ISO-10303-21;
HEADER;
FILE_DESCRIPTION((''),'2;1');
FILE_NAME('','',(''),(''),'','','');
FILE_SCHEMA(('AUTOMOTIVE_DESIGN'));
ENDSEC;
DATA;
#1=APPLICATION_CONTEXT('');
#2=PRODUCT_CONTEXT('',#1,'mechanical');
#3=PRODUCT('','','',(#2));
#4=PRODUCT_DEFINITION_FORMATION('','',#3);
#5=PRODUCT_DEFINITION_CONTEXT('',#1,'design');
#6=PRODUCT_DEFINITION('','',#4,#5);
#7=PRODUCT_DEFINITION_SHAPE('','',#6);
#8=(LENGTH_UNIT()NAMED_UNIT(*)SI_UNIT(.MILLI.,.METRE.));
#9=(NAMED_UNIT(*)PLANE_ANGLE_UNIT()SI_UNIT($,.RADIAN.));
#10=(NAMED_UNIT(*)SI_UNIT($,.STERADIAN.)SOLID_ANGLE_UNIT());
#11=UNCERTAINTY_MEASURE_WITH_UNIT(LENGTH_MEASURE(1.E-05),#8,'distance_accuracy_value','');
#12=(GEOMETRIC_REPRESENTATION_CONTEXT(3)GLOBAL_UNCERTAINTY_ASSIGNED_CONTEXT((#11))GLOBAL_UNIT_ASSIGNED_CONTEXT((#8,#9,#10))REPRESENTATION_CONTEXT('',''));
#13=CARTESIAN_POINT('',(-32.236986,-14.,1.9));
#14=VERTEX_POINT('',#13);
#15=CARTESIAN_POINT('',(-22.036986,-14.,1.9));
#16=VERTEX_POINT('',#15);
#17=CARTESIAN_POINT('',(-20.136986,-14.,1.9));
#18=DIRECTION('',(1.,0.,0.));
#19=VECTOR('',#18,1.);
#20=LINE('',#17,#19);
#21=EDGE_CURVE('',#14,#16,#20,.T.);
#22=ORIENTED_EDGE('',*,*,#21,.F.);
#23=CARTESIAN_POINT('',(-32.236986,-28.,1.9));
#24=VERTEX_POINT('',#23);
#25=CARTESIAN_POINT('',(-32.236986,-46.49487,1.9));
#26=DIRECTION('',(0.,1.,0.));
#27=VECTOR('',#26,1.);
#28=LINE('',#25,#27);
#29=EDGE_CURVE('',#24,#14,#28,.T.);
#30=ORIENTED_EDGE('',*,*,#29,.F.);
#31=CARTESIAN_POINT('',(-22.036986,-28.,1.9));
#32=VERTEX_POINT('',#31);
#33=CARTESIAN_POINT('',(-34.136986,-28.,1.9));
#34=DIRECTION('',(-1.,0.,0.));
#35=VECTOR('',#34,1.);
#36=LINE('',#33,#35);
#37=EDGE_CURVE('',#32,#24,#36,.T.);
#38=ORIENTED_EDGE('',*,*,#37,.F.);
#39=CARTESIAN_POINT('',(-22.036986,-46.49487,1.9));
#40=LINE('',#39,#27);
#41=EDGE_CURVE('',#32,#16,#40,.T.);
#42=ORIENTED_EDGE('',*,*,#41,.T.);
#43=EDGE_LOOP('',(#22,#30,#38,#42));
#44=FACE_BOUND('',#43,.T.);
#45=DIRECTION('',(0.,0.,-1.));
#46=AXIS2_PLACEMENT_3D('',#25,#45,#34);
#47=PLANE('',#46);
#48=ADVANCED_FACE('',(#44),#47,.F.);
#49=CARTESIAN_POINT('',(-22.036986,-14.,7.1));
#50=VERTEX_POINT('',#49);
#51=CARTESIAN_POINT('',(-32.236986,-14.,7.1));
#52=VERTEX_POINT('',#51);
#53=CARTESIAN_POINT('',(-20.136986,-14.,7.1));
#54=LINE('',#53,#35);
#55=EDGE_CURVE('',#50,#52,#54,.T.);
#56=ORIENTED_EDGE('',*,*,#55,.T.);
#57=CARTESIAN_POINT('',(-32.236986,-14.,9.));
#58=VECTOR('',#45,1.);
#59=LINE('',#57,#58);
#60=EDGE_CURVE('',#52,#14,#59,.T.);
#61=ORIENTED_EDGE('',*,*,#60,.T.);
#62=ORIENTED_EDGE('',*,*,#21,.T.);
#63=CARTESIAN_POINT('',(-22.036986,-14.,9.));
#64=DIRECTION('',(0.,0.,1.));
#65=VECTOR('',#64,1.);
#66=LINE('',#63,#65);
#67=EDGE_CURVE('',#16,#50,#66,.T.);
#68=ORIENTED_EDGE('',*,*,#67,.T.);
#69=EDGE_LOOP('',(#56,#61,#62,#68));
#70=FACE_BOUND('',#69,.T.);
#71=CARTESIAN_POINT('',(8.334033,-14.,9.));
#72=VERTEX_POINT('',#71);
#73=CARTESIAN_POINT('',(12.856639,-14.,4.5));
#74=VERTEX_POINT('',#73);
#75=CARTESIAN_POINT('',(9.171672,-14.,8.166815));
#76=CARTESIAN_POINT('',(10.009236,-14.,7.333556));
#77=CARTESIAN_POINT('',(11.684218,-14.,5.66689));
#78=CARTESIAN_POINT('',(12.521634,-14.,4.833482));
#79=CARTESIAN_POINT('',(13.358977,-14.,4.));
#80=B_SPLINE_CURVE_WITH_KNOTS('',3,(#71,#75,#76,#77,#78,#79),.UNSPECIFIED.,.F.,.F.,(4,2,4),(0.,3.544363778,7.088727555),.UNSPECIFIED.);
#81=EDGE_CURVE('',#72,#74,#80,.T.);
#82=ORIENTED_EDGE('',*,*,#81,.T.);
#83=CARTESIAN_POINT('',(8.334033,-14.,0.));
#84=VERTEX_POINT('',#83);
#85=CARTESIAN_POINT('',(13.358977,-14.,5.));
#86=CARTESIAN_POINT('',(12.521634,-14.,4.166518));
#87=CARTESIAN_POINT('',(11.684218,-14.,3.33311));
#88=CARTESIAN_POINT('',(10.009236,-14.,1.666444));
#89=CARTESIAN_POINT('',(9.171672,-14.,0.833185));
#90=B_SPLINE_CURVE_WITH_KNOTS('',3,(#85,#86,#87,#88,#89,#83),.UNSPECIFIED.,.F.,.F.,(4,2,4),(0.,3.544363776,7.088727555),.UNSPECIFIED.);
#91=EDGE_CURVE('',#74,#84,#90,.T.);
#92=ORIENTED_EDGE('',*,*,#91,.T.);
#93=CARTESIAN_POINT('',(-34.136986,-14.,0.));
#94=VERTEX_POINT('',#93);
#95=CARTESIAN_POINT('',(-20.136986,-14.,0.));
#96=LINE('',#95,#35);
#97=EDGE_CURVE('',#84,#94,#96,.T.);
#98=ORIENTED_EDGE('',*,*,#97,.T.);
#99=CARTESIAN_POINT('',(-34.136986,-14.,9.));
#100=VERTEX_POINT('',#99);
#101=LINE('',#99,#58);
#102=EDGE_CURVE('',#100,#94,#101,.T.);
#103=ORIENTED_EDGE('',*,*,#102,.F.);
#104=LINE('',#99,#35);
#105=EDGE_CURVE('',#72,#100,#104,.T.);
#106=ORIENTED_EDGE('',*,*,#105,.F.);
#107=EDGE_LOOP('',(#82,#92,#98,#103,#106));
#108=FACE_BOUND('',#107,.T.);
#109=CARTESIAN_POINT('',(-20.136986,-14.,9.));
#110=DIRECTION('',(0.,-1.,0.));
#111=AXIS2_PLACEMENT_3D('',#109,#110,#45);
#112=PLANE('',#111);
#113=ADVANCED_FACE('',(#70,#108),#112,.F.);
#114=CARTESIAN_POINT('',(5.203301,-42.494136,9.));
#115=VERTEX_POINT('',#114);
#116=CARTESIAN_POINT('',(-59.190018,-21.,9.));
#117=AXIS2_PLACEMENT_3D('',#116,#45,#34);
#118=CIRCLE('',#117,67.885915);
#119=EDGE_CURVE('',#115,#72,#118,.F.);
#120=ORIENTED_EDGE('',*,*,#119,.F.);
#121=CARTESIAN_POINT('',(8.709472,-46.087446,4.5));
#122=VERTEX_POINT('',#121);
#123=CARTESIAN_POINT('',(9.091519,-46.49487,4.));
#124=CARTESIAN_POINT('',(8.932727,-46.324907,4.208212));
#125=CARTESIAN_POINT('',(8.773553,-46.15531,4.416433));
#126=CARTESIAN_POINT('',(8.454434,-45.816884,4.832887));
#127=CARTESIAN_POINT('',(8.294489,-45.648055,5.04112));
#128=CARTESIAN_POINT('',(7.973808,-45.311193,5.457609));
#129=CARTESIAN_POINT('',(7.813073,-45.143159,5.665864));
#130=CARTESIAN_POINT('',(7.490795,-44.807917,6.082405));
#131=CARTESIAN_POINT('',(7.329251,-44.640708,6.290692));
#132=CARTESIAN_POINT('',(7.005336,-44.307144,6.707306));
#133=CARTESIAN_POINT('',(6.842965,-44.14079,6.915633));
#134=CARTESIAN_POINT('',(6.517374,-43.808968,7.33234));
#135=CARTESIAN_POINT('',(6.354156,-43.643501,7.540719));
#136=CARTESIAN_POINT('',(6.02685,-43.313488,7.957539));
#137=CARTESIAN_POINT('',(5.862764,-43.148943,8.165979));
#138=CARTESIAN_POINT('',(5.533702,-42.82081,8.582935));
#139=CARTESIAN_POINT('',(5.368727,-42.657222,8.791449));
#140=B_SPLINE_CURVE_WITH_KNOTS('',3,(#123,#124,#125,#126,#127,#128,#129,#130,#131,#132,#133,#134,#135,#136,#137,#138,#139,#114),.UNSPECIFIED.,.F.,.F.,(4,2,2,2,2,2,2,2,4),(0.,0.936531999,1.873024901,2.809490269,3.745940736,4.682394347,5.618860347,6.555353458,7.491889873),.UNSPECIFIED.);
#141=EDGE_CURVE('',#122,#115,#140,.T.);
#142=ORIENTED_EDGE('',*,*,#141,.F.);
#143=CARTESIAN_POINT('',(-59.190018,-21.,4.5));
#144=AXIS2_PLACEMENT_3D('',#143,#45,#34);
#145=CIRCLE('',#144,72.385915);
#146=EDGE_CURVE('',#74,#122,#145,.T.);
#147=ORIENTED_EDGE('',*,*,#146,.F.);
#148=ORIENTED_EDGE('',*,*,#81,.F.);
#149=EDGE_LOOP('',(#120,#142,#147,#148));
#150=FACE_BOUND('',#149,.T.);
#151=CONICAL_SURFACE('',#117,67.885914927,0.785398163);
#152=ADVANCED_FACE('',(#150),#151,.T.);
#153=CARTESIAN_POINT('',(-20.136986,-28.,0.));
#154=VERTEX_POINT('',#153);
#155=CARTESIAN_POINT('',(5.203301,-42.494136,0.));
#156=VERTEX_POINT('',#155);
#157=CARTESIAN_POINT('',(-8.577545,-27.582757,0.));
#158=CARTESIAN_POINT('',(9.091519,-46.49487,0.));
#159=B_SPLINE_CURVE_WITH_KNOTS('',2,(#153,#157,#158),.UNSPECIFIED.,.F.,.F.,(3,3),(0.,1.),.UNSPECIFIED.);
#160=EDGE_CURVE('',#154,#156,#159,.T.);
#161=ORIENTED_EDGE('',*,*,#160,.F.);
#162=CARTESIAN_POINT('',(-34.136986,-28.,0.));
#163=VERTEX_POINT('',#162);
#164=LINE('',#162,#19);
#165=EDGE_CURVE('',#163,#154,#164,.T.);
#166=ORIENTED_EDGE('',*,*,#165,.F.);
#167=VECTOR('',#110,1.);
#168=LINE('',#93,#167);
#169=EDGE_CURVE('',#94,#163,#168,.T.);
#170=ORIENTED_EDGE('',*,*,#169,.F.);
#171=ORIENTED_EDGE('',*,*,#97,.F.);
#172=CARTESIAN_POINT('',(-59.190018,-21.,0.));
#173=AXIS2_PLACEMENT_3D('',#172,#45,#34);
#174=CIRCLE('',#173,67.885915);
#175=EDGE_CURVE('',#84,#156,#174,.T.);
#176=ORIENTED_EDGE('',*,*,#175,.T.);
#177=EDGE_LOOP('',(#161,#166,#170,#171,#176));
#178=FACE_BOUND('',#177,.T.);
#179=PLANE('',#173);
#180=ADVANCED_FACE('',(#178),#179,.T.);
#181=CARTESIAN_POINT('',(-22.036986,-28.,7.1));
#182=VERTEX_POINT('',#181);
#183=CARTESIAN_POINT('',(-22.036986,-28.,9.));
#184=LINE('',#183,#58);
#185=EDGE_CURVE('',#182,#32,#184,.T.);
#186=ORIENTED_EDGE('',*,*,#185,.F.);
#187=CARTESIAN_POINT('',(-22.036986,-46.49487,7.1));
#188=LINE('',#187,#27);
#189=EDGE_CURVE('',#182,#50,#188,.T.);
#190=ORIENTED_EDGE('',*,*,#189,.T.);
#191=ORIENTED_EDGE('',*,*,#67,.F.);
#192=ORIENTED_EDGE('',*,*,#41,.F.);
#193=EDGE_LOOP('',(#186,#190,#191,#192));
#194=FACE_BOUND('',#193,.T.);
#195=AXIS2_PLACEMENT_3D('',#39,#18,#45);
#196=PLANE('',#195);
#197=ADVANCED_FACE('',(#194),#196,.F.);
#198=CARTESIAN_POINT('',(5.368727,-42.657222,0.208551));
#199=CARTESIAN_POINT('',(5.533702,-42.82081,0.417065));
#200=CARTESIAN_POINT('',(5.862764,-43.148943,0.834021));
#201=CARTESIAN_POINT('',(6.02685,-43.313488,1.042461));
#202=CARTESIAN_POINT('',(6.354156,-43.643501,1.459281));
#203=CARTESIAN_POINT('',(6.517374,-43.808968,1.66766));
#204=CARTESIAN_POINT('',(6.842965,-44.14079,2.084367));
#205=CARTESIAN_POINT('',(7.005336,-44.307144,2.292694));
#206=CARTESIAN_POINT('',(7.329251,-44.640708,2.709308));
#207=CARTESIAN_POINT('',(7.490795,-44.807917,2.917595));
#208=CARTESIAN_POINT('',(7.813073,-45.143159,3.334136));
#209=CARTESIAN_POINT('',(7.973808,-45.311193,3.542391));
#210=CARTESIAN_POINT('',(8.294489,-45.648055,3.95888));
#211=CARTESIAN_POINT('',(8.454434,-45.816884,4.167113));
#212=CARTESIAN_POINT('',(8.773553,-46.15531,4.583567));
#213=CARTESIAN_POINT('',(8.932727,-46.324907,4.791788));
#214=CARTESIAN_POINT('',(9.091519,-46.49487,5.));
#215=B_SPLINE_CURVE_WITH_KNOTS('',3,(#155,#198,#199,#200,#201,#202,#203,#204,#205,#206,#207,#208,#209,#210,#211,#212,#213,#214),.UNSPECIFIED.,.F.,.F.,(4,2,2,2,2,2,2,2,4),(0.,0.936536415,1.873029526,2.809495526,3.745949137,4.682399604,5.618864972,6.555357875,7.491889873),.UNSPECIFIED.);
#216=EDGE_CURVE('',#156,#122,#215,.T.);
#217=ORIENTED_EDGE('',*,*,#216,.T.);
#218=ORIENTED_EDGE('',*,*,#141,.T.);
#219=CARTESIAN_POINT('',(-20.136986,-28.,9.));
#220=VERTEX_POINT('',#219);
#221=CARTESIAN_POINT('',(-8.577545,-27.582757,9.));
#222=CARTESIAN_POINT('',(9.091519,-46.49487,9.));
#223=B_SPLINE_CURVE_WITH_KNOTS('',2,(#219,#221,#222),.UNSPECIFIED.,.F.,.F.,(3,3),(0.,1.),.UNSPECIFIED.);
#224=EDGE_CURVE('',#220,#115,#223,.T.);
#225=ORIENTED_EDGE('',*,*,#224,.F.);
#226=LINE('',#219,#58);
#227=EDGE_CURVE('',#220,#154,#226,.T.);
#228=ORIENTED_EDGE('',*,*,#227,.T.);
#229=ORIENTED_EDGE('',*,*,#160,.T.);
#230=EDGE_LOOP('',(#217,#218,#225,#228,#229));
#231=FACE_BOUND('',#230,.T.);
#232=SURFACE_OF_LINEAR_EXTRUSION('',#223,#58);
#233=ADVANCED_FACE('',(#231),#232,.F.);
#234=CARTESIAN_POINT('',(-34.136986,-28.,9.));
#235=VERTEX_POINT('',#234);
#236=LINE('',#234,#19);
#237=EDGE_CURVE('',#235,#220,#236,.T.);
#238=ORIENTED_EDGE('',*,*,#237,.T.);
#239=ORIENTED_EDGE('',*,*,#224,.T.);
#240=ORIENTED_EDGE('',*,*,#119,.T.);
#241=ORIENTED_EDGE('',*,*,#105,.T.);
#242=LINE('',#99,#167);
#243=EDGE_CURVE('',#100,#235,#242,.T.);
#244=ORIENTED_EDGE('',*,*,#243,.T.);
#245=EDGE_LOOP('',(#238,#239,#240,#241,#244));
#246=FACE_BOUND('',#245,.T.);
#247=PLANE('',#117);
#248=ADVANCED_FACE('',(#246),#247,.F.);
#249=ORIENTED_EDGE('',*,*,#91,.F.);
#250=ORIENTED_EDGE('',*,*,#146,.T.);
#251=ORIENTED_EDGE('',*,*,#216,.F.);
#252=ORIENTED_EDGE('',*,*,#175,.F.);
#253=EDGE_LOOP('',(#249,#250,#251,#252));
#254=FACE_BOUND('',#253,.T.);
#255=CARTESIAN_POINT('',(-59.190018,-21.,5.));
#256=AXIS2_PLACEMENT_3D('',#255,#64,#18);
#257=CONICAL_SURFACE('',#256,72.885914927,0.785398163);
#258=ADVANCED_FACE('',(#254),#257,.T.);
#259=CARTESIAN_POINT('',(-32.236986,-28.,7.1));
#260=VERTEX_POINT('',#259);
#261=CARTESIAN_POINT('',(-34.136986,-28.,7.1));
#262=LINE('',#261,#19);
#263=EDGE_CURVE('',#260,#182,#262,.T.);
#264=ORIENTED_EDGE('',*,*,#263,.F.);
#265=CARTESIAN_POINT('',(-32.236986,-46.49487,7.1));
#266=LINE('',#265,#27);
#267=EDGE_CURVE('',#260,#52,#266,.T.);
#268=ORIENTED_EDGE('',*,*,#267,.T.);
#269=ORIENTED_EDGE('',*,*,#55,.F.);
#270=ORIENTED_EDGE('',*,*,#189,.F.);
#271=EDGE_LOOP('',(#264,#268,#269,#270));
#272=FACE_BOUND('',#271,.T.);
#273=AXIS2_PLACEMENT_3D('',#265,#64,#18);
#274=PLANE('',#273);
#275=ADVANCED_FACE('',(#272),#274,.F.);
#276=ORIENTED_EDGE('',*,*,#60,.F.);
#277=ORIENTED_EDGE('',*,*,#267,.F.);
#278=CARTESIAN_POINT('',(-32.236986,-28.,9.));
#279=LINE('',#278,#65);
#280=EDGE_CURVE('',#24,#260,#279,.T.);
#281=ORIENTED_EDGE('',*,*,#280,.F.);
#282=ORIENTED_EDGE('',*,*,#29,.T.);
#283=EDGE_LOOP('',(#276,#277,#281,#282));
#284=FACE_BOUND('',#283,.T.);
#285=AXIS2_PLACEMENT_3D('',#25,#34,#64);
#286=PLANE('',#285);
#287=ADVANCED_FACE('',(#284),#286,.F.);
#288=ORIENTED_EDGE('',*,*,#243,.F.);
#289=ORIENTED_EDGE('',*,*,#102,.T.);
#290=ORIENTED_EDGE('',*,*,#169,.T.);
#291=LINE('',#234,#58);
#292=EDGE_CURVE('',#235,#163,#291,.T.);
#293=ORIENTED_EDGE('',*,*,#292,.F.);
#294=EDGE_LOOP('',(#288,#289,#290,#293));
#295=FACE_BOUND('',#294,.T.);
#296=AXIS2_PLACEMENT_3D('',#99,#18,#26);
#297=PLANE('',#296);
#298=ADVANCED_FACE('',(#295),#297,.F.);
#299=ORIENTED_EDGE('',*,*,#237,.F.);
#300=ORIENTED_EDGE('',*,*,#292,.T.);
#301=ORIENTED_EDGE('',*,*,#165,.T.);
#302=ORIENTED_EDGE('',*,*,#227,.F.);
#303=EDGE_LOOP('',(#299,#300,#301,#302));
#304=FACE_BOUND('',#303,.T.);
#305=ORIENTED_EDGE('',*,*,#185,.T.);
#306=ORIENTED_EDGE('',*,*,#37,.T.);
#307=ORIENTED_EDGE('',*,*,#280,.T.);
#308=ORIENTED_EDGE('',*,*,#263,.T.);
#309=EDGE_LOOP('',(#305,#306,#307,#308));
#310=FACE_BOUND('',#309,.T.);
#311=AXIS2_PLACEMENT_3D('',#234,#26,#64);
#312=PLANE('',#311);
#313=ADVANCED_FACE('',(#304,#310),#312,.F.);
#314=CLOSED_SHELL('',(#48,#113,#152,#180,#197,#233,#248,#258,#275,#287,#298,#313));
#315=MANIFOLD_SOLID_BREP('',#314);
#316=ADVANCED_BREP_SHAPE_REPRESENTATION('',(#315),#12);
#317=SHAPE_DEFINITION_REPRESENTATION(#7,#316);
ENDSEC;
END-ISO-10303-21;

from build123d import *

# Parameters (mm, degrees)
BOSS_EXTRUDE1_DEPTH     = 9
CUT_EXTRUDE1_DEPTH      = 48.981771871
CUT_EXTRUDE1_DEPTH_BACK = 48.981771871
SKETCH2_W               = 10.2
SKETCH2_H               = 5.2
CHAMFER1_SIZE           = 5


with BuildPart() as part:
    # Sketch1 → Boss-Extrude1 (new body)
    with BuildSketch(Plane.XY):
        with BuildLine():
            Line((-34.136986301, -14), (-34.136986301, -28))
            Line((-34.136986301, -28), (-20.136986301, -28))
            add(Edge.make_bspline(
                [(-20.136986301, -28), (-8.577544678, -27.582757126), (9.091518621, -46.494870104)],
                knots=[0, 0, 0, 1, 1, 1], degree=2))
            ThreePointArc((9.091518621, -46.494870104), (13.07538723, -30.490408573), (13.358976811, -14))
            Line((13.358976811, -14), (-20.136986301, -14))
            Line((-20.136986301, -14), (-34.136986301, -14))
        make_face()
    extrude(amount=BOSS_EXTRUDE1_DEPTH)

    # Sketch2 → Cut-Extrude1 (cut, two sides: drawn at the far end of the back side and taken through both)
    with BuildSketch(Plane(origin=(0, -14, 0), x_dir=(1, 0, 0), z_dir=(0, 1, 0)).offset(-CUT_EXTRUDE1_DEPTH_BACK)):
        with Locations((-27.136986301, -4.5)):
            Rectangle(SKETCH2_W, SKETCH2_H)
    extrude(amount=CUT_EXTRUDE1_DEPTH + CUT_EXTRUDE1_DEPTH_BACK, mode=Mode.SUBTRACT)

    # Chamfer1
    # the kernel refuses this chamfer: 5 mm, written as the material it takes off along each edge
    with BuildSketch(Plane(origin=(-59.190017632, -21, 0), x_dir=(0.8608936735034536, -0.5087849083077534, 0), z_dir=(-0.5087849083077534, -0.8608936735034536, 0))) as chamfer1_piece_1:
        Polygon((72.885914927 - CHAMFER1_SIZE, 0), (72.885914927, CHAMFER1_SIZE), (72.885914927, 0), align=None)
    revolve(axis=Axis((-59.190017632, -21, 0), (0, 0, 1)), revolution_arc=46.202504034, mode=Mode.SUBTRACT)
    with BuildSketch(Plane(origin=(-59.190017632, -21, 9), x_dir=(0.8608936735034536, -0.5087849083077534, 0), z_dir=(-0.5087849083077534, -0.8608936735034536, 0))) as chamfer1_piece_2:
        Polygon((72.885914927 - CHAMFER1_SIZE, 0), (72.885914927, -CHAMFER1_SIZE), (72.885914927, 0), align=None)
    revolve(axis=Axis((-59.190017632, -21, 9), (0, 0, 1)), revolution_arc=46.202504034, mode=Mode.SUBTRACT)


solid = part.part
